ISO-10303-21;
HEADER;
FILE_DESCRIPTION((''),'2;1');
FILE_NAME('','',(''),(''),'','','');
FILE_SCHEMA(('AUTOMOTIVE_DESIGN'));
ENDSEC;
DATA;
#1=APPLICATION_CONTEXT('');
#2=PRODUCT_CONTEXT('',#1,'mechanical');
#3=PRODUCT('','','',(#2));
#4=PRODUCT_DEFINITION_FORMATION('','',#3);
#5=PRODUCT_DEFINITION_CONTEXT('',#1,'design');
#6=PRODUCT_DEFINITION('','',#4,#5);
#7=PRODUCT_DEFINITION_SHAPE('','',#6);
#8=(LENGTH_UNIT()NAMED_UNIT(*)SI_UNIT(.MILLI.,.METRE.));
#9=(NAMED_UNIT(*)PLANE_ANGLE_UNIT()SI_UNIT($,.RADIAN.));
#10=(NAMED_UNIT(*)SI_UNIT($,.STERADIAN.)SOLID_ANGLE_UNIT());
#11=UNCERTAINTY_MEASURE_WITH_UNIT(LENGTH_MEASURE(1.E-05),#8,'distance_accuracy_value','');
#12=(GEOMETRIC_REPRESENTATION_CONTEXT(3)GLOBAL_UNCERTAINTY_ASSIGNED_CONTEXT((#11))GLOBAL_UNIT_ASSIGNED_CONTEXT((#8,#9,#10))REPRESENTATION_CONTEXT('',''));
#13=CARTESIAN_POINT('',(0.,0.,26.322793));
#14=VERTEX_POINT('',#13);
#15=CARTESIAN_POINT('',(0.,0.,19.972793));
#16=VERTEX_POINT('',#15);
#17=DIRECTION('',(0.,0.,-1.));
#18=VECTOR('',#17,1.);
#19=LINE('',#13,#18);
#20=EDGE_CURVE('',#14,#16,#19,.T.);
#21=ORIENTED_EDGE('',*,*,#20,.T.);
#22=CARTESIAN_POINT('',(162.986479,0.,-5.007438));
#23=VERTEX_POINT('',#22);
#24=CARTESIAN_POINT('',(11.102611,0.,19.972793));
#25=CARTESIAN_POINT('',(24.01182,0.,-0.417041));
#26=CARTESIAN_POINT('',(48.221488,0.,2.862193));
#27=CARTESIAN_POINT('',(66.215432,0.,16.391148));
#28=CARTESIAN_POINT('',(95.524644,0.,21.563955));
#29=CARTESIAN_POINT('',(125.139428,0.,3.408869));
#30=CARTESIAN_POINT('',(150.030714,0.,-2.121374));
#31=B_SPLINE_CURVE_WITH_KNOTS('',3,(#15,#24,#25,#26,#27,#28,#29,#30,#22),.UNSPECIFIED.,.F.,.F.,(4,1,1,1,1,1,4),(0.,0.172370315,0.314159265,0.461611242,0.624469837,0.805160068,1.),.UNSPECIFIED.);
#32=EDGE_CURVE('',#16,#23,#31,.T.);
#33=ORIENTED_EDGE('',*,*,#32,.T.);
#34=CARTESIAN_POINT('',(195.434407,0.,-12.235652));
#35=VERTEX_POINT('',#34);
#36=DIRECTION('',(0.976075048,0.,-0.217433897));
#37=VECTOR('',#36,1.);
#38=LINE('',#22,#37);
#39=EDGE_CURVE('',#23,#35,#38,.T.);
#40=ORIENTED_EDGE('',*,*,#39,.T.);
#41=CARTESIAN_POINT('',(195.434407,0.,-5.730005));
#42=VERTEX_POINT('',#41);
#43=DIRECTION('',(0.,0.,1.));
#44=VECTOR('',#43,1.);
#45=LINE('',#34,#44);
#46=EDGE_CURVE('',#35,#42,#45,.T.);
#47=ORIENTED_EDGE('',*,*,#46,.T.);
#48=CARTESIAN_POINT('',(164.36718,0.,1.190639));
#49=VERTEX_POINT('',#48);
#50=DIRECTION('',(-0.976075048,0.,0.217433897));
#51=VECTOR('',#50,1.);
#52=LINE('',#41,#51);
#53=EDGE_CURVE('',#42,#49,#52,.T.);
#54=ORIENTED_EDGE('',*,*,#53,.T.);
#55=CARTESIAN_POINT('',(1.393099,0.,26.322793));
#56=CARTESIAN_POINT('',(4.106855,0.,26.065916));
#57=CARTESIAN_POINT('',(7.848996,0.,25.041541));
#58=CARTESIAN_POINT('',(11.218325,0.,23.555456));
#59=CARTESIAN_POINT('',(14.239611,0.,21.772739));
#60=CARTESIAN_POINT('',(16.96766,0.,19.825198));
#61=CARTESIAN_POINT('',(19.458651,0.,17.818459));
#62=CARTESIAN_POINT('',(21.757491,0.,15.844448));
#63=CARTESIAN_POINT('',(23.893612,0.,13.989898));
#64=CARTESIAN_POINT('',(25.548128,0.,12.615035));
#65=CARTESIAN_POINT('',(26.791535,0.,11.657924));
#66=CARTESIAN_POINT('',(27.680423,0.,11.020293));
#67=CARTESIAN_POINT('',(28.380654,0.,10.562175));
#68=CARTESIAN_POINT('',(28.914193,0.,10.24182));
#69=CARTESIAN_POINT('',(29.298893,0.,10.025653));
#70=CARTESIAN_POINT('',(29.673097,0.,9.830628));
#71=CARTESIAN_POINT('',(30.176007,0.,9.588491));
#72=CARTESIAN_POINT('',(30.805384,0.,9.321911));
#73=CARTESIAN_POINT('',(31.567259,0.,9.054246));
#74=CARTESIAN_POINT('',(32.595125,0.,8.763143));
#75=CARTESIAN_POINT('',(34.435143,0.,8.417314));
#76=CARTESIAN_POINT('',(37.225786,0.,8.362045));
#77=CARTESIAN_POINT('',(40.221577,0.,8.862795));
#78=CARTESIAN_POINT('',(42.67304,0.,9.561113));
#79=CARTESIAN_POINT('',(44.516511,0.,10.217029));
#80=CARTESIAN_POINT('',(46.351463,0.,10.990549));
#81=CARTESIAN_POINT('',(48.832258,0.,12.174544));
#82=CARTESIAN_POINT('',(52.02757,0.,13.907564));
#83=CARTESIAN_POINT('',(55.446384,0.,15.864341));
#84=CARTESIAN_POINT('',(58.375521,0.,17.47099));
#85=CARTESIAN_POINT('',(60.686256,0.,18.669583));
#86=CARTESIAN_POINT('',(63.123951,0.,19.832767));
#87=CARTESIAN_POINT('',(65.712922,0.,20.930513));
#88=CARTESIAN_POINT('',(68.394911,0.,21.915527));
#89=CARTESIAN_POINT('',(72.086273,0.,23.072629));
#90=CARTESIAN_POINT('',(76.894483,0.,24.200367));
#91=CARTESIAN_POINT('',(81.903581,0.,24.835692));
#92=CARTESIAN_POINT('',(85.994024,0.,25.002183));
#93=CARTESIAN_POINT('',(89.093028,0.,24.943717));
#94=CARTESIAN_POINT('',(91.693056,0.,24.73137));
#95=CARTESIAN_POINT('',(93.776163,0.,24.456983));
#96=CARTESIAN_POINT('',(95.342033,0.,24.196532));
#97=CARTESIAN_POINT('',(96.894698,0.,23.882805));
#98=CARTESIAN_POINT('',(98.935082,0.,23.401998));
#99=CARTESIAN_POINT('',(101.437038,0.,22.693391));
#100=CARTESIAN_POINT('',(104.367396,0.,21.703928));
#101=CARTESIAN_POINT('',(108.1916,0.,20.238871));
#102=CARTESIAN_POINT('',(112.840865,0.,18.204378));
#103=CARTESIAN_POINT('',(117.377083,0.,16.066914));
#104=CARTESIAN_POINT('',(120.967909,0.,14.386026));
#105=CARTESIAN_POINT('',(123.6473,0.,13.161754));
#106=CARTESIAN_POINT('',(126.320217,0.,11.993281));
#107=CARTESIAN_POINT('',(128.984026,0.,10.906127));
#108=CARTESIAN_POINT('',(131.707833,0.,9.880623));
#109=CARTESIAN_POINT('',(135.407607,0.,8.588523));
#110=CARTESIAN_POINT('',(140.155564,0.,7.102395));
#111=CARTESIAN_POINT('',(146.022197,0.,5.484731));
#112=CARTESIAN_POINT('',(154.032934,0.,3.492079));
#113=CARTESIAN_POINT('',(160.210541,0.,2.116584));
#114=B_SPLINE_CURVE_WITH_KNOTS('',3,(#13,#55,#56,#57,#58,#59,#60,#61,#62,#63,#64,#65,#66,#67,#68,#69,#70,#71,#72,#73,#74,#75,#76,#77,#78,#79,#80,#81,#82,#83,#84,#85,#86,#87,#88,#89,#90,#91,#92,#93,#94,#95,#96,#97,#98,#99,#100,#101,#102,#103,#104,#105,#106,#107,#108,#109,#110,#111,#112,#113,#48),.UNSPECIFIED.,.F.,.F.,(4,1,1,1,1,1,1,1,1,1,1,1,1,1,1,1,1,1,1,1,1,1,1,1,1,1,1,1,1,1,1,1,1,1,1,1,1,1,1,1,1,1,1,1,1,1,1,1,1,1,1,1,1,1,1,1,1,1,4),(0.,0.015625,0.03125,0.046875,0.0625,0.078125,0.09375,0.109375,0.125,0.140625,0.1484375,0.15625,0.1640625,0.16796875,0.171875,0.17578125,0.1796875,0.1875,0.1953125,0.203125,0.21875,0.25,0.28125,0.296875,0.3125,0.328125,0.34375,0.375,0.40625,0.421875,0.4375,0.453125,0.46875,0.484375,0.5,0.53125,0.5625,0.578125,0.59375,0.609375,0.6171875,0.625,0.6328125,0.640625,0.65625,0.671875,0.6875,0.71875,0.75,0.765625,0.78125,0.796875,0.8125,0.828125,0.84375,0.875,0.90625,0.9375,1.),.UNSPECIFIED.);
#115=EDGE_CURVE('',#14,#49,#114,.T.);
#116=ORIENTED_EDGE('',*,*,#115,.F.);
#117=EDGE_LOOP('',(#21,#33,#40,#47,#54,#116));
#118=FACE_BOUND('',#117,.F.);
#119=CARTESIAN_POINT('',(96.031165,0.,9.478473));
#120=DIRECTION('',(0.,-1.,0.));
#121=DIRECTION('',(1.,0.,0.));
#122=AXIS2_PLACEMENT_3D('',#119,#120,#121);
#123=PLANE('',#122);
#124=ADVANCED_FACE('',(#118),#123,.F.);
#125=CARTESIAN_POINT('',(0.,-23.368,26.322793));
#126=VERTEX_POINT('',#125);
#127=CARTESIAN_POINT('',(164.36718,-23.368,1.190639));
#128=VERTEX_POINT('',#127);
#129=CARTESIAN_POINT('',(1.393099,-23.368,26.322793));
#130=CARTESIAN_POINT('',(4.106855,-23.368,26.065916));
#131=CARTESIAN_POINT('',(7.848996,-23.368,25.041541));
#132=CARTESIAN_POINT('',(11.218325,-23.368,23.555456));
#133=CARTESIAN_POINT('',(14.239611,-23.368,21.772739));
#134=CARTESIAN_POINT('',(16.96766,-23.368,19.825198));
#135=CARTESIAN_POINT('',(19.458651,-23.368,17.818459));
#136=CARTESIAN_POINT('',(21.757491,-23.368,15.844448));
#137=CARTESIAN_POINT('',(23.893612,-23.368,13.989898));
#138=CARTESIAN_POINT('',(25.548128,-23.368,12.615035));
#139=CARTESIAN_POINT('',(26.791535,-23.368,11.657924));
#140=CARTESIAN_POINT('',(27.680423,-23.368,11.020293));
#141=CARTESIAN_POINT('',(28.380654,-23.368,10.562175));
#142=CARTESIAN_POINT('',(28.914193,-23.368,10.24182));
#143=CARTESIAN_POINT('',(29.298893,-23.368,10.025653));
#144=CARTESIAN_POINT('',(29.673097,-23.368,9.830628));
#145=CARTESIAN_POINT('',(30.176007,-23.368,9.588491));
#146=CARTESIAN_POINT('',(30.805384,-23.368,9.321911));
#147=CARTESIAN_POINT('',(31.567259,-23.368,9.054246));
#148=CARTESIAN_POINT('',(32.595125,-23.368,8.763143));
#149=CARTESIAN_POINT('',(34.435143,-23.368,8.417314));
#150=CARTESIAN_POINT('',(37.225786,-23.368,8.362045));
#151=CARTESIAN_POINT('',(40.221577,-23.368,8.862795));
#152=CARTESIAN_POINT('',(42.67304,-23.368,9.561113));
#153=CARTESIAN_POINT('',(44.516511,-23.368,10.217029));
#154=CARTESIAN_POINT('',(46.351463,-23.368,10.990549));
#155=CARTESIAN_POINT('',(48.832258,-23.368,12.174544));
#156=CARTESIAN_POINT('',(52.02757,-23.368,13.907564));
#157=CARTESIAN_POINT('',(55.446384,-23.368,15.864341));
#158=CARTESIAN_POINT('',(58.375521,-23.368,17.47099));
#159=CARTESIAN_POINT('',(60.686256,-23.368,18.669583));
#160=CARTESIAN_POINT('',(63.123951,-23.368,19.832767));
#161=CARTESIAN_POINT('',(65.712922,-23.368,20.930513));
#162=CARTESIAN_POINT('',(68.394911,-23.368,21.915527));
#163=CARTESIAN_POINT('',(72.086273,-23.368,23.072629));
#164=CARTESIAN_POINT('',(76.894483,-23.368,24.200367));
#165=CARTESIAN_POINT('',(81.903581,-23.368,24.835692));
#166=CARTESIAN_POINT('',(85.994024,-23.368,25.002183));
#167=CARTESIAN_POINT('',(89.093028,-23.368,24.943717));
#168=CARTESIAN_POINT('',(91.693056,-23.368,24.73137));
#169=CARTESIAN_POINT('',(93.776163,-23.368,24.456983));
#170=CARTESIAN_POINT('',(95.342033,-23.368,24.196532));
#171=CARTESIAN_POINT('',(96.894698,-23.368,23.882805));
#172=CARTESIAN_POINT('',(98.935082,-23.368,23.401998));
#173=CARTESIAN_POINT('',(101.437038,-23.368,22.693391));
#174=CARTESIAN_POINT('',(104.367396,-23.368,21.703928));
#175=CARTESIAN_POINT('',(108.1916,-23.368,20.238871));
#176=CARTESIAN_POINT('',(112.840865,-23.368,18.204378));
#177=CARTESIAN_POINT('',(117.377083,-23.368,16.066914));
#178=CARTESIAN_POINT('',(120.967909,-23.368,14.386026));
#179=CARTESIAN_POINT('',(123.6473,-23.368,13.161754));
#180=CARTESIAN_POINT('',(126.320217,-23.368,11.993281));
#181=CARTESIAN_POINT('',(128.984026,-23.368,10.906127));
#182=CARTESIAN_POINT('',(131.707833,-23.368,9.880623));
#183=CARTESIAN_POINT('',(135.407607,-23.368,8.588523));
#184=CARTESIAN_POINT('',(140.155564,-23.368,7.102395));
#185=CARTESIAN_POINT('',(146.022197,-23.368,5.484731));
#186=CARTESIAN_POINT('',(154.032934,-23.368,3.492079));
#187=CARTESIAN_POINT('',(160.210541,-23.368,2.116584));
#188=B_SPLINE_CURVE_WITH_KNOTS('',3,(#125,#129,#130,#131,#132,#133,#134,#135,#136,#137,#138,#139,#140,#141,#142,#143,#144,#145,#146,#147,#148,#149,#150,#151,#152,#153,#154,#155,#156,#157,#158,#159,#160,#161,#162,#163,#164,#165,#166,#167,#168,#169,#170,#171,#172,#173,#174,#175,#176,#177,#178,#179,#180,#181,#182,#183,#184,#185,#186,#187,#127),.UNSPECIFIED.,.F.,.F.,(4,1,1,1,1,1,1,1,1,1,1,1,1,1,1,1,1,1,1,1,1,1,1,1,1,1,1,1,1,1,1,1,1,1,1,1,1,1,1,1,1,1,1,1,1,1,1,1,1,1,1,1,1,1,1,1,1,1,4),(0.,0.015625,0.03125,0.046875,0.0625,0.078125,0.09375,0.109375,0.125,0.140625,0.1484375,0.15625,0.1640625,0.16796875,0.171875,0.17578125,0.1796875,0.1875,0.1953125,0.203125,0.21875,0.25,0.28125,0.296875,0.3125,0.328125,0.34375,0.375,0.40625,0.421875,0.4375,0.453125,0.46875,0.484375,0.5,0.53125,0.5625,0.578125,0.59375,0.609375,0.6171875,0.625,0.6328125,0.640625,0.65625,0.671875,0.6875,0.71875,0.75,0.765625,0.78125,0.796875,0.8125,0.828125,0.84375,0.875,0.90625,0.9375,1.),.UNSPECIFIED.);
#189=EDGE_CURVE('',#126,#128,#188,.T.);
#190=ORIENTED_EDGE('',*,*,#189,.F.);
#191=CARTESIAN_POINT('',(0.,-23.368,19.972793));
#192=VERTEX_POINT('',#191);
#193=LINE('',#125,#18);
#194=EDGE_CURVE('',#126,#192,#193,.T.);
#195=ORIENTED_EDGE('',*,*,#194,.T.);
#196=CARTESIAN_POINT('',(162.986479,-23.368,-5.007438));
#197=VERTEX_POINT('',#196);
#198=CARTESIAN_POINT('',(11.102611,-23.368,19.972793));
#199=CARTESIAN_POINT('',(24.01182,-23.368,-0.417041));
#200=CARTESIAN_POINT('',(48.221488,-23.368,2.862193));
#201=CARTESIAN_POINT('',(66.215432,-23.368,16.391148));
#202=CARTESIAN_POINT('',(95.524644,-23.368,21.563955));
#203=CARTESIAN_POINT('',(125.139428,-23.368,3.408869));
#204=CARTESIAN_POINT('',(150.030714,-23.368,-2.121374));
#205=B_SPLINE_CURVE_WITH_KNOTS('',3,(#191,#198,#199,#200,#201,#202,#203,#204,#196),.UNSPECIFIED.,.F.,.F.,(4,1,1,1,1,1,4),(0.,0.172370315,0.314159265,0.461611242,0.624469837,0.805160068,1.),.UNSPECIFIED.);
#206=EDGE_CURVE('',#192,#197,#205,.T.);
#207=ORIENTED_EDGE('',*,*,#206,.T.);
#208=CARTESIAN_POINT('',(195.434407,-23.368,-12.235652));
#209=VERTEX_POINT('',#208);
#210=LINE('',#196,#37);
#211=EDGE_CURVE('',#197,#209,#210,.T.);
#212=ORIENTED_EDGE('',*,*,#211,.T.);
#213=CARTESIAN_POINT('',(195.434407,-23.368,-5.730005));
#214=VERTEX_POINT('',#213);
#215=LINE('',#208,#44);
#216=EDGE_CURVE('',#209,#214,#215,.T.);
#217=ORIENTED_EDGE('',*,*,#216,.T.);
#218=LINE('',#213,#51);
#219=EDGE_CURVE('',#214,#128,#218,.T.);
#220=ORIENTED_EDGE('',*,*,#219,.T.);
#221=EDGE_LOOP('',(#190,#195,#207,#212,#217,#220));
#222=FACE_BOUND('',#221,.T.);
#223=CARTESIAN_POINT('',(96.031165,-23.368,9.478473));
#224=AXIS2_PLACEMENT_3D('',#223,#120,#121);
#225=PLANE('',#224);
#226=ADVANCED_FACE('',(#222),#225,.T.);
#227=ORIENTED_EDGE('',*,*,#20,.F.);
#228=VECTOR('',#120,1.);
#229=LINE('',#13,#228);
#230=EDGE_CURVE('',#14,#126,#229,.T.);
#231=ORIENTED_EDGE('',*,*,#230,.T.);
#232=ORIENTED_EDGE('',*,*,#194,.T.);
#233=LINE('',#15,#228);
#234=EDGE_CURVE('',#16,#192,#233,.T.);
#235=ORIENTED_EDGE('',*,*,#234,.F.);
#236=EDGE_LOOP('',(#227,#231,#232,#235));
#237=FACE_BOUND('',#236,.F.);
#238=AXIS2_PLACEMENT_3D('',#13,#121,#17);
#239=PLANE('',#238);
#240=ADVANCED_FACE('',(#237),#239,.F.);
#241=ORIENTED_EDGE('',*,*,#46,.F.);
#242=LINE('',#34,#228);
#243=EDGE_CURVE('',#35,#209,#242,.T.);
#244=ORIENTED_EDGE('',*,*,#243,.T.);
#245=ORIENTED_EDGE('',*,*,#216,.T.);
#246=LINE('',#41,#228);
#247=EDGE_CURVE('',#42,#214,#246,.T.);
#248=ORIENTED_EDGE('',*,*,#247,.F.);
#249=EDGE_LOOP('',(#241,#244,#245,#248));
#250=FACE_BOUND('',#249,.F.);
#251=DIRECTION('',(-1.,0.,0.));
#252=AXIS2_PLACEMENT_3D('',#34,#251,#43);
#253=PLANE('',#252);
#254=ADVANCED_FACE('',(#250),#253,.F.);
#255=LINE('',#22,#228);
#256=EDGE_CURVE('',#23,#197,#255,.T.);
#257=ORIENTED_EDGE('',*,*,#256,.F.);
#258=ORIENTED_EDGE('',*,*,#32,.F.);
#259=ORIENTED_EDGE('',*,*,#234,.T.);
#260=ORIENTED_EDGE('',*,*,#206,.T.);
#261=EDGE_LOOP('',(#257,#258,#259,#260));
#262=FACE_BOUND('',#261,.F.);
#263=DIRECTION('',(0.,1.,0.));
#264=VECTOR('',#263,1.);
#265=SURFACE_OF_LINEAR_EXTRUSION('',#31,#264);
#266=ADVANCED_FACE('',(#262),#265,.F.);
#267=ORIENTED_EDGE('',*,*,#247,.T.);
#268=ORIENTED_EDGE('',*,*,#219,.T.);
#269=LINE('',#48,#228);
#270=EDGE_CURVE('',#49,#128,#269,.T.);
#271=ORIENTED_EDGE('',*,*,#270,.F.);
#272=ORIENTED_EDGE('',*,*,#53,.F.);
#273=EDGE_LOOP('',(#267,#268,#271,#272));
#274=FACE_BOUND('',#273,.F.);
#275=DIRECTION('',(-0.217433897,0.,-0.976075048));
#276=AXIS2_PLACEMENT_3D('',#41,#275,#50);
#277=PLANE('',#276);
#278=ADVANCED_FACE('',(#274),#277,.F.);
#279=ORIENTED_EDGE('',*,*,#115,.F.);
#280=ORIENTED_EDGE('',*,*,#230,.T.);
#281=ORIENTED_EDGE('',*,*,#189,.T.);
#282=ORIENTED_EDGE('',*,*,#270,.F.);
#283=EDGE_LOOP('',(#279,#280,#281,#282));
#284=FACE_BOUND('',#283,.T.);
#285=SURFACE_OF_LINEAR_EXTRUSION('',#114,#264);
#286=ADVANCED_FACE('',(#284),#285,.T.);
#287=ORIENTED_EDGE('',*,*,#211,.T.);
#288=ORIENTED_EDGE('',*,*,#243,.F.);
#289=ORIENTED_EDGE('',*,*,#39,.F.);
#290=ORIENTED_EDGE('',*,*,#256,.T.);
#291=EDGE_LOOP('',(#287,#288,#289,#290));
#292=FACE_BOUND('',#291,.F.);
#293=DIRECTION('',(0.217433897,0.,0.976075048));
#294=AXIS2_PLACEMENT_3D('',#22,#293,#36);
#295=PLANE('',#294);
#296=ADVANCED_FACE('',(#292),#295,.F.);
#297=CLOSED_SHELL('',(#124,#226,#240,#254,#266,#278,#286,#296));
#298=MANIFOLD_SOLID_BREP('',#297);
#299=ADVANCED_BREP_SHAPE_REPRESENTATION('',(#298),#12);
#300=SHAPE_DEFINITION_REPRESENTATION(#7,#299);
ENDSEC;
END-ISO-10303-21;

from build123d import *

# Parameters (mm, degrees)
F1_DEPTH = 23.368


# Not quite as in the source:
# - the dataset's text gives a spline's control points without its knots; the knots are read off the source's solid


with BuildPart() as f1:
    # F0 (on Front) → F1 (new body)
    with BuildSketch(Plane.XZ):
        with BuildLine():
            Line((0, 26.3227925215), (0, 19.9727928484))
            add(Edge.make_bspline(
                [(0, 19.9727928484), (11.102610788, 19.9727928484), (24.0118203246, -0.4170408168), (48.2214875777, 2.8621932512), (66.2154322806, 16.3911481519), (95.5246442906, 21.5639547504), (125.1394278308, 3.4088687327), (150.0307135552, -2.1213738435), (162.9864787767, -5.0074378938)],
                knots=[0, 0, 0, 0, 0.1723703148, 0.3141592651, 0.4616112416, 0.6244698371, 0.805160068, 1, 1, 1, 1], degree=3))
            Line((162.9864787767, -5.0074378938), (195.4344071553, -12.2356520965))
            Line((195.4344071553, -12.2356520965), (195.4344071553, -5.7300051354))
            Line((195.4344071553, -5.7300051354), (164.3671804902, 1.1906391165))
            add(Edge.make_bspline(
                [(0, 26.3227925215), (1.3930985092, 26.3227925215), (4.1068550879, 26.0659157386), (7.848996333, 25.0415413872), (11.2183253265, 23.5554560303), (14.2396111151, 21.7727388666), (16.9676597459, 19.8251977619), (19.458650937, 17.8184592472), (21.7574912325, 15.8444482238), (23.8936120995, 13.9898979295), (25.5481283987, 12.6150346283), (26.7915352586, 11.6579237344), (27.6804229187, 11.0202931775), (28.3806537167, 10.5621754408), (28.9141934427, 10.2418198595), (29.298893016, 10.0256533225), (29.6730966563, 9.8306281378), (30.1760067693, 9.5884905947), (30.8053835993, 9.3219109007), (31.5672585549, 9.0542461292), (32.595125264, 8.7631428809), (34.435142562, 8.4173137089), (37.225785803, 8.3620454215), (40.2215771883, 8.8627951842), (42.6730404965, 9.5611130291), (44.5165110348, 10.2170287339), (46.3514630911, 10.9905490092), (48.8322576024, 12.1745436809), (52.0275700179, 13.9075641285), (55.446383954, 15.8643405587), (58.3755209498, 17.4709896702), (60.6862561083, 18.6695832149), (63.1239509801, 19.832767171), (65.7129215362, 20.93051289), (68.3949109424, 21.9155268828), (72.0862734439, 23.0726290198), (76.8944825354, 24.2003666263), (81.9035808152, 24.8356921554), (85.9940241208, 25.0021832871), (89.0930275481, 24.9437168985), (91.693055933, 24.7313703034), (93.7761625359, 24.4569829862), (95.3420334816, 24.1965321097), (96.8946982873, 23.8828054107), (98.9350819627, 23.4019984243), (101.4370380597, 22.693391027), (104.3673962737, 21.7039280297), (108.1916003993, 20.2388706766), (112.8408650006, 18.2043784705), (117.377082885, 16.0669142549), (120.9679094796, 14.3860263561), (123.647300111, 13.1617536403), (126.3202169859, 11.9932805612), (128.9840255755, 10.9061272143), (131.7078333291, 9.8806229712), (135.4076068224, 8.5885233668), (140.1555637787, 7.1023954367), (146.0221971103, 5.4847305098), (154.0329342164, 3.4920794412), (160.2105412272, 2.1165842028), (164.3671804902, 1.1906391165)],
                knots=[0, 0, 0, 0, 0.015625, 0.03125, 0.046875, 0.0625, 0.078125, 0.09375, 0.109375, 0.125, 0.140625, 0.1484375, 0.15625, 0.1640625, 0.16796875, 0.171875, 0.17578125, 0.1796875, 0.1875, 0.1953125, 0.203125, 0.21875, 0.25, 0.28125, 0.296875, 0.3125, 0.328125, 0.34375, 0.375, 0.40625, 0.421875, 0.4375, 0.453125, 0.46875, 0.484375, 0.5, 0.53125, 0.5625, 0.578125, 0.59375, 0.609375, 0.6171875, 0.625, 0.6328125, 0.640625, 0.65625, 0.671875, 0.6875, 0.71875, 0.75, 0.765625, 0.78125, 0.796875, 0.8125, 0.828125, 0.84375, 0.875, 0.90625, 0.9375, 1, 1, 1, 1], degree=3))
        make_face()
    extrude(amount=F1_DEPTH)


solid = f1.part
